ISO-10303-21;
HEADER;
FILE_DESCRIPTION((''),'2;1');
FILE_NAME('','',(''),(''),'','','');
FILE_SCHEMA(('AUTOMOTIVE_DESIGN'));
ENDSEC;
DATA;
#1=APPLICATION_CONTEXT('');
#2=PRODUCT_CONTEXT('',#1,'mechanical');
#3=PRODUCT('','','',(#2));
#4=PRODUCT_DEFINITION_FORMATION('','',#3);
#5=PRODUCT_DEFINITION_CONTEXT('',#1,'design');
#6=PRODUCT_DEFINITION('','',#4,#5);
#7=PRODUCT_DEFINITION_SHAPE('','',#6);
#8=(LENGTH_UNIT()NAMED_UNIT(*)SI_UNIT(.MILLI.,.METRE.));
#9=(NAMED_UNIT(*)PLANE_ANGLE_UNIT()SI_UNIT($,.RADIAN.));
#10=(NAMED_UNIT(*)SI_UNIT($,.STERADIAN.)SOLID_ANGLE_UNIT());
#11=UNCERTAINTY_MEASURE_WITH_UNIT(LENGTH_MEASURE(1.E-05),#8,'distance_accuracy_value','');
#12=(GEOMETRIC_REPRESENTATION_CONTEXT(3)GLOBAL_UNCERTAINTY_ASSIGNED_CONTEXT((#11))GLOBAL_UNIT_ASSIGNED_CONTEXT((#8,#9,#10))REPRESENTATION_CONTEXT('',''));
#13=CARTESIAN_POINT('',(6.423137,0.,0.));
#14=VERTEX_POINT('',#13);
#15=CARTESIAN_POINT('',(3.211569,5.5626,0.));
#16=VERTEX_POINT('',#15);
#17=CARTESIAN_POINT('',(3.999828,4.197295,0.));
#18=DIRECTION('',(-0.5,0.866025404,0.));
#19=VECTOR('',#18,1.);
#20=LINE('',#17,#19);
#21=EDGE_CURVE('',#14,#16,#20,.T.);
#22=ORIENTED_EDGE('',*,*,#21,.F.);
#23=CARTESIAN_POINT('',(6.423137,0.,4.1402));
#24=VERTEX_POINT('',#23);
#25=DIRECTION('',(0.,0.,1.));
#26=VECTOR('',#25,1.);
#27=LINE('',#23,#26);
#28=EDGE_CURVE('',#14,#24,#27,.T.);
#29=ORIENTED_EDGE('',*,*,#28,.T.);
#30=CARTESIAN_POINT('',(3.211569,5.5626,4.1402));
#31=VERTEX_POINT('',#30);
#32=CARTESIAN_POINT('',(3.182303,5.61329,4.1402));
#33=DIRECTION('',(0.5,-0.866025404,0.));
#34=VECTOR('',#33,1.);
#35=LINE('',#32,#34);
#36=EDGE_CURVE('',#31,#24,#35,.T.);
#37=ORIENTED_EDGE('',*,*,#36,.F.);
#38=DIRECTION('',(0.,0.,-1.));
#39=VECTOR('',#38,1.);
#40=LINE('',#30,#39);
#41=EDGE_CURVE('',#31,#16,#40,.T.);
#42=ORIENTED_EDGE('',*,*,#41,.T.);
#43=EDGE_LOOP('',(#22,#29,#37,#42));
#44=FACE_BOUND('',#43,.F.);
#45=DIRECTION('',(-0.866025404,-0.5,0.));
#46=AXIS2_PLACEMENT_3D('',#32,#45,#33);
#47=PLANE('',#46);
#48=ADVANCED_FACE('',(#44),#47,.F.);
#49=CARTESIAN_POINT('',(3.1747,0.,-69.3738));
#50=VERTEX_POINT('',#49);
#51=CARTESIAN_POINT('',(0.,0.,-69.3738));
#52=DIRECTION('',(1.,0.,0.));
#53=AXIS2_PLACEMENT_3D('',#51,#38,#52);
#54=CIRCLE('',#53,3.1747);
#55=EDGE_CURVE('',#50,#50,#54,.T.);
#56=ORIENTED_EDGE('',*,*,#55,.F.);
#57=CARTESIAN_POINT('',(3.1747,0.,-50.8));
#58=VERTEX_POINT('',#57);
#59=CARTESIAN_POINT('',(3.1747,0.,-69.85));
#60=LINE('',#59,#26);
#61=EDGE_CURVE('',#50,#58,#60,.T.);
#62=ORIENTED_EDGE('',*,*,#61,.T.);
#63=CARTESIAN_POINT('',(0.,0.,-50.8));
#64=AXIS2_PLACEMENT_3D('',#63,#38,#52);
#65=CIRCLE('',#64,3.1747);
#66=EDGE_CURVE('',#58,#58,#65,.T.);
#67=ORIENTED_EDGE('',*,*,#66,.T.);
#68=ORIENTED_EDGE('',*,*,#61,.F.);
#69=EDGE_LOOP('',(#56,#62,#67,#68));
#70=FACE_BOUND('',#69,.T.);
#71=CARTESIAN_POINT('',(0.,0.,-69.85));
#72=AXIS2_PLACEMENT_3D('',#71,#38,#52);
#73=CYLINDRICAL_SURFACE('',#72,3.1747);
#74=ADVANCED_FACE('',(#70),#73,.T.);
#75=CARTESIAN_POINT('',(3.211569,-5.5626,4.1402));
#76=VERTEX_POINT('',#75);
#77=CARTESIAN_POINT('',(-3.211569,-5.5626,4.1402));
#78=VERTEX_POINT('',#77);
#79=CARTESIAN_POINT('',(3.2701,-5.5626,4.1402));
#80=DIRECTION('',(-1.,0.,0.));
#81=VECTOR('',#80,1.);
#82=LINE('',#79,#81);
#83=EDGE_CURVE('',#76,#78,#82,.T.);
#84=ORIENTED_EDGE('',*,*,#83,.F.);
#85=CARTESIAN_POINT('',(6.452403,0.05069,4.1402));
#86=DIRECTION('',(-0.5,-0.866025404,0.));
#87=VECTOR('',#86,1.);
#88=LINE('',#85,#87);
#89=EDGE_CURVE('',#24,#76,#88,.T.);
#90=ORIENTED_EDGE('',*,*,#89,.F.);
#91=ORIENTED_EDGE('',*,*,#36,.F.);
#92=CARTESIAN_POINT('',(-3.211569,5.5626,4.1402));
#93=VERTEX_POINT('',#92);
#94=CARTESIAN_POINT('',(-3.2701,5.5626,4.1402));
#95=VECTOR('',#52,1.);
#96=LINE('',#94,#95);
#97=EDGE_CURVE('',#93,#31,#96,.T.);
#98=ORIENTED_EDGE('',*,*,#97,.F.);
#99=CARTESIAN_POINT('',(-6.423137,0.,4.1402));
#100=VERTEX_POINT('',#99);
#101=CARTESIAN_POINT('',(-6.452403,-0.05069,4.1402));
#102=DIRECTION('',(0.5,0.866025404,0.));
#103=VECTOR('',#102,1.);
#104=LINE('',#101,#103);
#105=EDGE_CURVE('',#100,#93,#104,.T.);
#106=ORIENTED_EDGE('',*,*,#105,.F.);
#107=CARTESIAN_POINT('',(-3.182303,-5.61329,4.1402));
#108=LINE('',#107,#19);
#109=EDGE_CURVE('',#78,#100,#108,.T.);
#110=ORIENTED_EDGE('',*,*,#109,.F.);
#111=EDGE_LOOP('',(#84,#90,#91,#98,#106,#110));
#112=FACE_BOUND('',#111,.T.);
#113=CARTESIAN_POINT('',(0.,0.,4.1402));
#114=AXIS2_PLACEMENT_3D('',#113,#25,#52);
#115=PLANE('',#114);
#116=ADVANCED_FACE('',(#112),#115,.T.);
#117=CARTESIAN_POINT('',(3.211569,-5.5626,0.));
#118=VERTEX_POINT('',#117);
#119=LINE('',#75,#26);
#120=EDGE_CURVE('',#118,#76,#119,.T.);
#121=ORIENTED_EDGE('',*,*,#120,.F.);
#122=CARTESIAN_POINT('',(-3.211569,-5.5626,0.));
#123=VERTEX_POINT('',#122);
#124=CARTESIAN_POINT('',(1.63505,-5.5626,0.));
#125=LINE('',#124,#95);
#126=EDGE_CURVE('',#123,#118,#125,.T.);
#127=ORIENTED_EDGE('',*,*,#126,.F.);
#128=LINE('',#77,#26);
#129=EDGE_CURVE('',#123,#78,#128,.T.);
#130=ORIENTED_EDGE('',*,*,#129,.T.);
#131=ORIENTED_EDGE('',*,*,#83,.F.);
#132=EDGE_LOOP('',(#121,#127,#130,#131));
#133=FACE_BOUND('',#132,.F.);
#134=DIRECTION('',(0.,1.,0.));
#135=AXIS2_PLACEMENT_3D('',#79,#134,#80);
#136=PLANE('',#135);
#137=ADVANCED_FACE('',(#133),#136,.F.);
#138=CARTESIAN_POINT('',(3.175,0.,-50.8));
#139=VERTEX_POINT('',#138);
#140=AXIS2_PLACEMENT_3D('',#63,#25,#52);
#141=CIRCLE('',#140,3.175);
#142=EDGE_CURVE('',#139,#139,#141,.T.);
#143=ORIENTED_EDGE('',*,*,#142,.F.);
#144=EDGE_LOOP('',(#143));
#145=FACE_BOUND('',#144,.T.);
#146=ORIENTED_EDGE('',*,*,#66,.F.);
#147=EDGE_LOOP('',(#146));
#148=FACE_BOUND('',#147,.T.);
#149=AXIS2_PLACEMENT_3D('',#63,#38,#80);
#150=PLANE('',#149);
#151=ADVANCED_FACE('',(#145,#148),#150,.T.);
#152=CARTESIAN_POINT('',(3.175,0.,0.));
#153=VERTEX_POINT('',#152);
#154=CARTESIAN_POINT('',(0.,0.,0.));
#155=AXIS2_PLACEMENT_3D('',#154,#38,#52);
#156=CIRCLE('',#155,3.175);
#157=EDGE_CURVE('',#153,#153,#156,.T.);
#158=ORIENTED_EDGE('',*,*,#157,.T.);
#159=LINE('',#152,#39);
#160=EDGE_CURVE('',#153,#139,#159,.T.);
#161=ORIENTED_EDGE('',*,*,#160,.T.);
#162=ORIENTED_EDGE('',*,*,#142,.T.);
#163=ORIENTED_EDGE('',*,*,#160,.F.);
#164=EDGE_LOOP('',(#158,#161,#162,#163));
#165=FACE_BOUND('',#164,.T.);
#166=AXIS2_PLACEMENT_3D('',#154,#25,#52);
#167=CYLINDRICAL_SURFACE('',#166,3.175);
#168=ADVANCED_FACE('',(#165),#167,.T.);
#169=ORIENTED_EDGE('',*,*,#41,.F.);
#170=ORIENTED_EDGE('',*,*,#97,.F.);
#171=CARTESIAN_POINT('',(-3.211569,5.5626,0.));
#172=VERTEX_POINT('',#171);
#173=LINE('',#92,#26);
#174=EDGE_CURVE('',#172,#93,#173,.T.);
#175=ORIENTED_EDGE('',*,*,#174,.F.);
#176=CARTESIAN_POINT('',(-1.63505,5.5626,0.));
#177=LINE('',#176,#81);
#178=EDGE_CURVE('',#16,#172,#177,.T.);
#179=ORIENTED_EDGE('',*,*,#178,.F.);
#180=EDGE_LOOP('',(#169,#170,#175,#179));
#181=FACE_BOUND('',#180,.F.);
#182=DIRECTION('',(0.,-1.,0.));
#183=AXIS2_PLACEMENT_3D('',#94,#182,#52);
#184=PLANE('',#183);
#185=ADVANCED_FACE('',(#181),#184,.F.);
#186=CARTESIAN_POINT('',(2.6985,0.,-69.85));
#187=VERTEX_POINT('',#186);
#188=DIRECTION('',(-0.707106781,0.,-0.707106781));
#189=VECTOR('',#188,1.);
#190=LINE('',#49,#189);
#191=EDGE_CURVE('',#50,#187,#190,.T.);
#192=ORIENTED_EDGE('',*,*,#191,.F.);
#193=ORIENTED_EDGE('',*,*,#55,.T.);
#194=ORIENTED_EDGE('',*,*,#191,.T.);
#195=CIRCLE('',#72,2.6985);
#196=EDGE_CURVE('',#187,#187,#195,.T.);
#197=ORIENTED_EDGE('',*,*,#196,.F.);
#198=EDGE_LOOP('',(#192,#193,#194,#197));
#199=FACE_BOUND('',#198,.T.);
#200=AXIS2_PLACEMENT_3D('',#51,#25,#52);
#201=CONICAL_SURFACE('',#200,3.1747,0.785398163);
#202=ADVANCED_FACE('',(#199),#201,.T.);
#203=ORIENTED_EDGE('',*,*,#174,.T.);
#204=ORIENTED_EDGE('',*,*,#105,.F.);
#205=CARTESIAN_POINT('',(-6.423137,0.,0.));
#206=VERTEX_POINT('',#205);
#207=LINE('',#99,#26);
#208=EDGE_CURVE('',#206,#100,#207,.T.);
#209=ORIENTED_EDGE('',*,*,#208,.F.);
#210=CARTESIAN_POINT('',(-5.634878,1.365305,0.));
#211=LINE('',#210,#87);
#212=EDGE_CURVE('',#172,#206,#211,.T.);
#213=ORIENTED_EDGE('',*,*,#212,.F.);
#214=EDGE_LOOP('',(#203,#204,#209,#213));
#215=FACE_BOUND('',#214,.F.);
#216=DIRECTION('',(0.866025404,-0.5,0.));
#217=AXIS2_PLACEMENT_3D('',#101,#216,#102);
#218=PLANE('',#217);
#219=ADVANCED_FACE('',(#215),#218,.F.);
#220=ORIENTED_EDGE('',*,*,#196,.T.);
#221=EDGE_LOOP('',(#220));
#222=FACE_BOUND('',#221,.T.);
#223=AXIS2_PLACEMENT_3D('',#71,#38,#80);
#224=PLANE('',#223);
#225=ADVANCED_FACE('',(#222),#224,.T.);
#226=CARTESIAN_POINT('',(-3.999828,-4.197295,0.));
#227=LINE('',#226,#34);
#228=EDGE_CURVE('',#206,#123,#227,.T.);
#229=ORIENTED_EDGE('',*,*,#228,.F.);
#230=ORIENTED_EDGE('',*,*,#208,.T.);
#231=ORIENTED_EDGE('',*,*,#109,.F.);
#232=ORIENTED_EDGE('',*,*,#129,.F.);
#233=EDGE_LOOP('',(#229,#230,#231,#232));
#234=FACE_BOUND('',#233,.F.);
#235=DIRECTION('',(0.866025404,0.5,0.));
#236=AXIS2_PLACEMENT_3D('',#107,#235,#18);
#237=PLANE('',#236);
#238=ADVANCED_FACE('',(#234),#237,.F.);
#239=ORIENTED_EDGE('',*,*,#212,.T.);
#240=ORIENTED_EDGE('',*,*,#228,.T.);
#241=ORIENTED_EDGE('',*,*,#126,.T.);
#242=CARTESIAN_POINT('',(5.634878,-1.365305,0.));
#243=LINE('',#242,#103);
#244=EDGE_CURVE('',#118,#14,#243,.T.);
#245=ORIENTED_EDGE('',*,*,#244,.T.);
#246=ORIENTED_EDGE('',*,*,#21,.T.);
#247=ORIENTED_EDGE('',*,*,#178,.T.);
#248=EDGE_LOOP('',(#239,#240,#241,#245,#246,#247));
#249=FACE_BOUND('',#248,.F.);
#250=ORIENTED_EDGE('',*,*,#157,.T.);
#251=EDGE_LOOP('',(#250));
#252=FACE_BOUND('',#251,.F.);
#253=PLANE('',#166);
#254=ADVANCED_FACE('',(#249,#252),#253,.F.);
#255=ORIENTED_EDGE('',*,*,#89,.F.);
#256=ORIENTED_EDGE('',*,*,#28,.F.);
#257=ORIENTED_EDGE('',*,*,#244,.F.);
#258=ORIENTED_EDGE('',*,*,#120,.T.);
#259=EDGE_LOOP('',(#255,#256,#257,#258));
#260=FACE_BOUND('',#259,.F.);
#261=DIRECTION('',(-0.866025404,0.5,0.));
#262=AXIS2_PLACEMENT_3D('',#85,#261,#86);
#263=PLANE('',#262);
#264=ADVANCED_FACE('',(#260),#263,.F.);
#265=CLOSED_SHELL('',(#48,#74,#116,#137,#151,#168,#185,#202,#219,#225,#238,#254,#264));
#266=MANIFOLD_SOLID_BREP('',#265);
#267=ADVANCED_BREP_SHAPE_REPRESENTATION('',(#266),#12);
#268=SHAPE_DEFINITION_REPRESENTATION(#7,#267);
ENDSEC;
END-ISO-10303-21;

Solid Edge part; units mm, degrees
sketch "Sketch1" plane through (0, 0, 0) normal (0, 0, 1) x (1, 0, 0)
  circle A0 centre (0, 0) radius 6.4526
  dimension "D1" = 12.9052
extrude "Protrusion1" add sketch "Sketch1" along normal blind 4.1402
sketch "Sketch2" plane through (0, 0, 0) normal (0, 0, -1) x (1, 0, 0)
  circle A0 centre (0, 0) radius 3.175
extrude "Protrusion2" add sketch "Sketch2" along normal blind 69.85
sketch "Sketch3" plane through (0, 0, -69.85) normal (0, 0, -1) x (1, 0, 0)
  circle A0 centre (0, 0) radius 3.1747
extrude "Cutout1" cut sketch "Sketch3" against normal blind 19.05 flip side to cut
chamfer "Chamfer_1" distance 0.4762 angle 45 1 edges at (-3.1747, 0, -69.85)
sketch "Sketch4" plane through (0, 0, 4.1402) normal (0, 0, 1) x (1, 0, 0)
  line L0 (-3.2701, 5.5626) -> (3.2701, 5.5626)
  dimension "D1" = 11.1252
extrude "Cutout2" cut sketch "Sketch4" against normal up to next material side at (0, 5.6126, 4.1402)
pattern_circular "Pattern1" count 6 over 360 about axis through (0, 0, 4.1402) along (0, 0, 1) of "Cutout2"
properties part number "117655"
